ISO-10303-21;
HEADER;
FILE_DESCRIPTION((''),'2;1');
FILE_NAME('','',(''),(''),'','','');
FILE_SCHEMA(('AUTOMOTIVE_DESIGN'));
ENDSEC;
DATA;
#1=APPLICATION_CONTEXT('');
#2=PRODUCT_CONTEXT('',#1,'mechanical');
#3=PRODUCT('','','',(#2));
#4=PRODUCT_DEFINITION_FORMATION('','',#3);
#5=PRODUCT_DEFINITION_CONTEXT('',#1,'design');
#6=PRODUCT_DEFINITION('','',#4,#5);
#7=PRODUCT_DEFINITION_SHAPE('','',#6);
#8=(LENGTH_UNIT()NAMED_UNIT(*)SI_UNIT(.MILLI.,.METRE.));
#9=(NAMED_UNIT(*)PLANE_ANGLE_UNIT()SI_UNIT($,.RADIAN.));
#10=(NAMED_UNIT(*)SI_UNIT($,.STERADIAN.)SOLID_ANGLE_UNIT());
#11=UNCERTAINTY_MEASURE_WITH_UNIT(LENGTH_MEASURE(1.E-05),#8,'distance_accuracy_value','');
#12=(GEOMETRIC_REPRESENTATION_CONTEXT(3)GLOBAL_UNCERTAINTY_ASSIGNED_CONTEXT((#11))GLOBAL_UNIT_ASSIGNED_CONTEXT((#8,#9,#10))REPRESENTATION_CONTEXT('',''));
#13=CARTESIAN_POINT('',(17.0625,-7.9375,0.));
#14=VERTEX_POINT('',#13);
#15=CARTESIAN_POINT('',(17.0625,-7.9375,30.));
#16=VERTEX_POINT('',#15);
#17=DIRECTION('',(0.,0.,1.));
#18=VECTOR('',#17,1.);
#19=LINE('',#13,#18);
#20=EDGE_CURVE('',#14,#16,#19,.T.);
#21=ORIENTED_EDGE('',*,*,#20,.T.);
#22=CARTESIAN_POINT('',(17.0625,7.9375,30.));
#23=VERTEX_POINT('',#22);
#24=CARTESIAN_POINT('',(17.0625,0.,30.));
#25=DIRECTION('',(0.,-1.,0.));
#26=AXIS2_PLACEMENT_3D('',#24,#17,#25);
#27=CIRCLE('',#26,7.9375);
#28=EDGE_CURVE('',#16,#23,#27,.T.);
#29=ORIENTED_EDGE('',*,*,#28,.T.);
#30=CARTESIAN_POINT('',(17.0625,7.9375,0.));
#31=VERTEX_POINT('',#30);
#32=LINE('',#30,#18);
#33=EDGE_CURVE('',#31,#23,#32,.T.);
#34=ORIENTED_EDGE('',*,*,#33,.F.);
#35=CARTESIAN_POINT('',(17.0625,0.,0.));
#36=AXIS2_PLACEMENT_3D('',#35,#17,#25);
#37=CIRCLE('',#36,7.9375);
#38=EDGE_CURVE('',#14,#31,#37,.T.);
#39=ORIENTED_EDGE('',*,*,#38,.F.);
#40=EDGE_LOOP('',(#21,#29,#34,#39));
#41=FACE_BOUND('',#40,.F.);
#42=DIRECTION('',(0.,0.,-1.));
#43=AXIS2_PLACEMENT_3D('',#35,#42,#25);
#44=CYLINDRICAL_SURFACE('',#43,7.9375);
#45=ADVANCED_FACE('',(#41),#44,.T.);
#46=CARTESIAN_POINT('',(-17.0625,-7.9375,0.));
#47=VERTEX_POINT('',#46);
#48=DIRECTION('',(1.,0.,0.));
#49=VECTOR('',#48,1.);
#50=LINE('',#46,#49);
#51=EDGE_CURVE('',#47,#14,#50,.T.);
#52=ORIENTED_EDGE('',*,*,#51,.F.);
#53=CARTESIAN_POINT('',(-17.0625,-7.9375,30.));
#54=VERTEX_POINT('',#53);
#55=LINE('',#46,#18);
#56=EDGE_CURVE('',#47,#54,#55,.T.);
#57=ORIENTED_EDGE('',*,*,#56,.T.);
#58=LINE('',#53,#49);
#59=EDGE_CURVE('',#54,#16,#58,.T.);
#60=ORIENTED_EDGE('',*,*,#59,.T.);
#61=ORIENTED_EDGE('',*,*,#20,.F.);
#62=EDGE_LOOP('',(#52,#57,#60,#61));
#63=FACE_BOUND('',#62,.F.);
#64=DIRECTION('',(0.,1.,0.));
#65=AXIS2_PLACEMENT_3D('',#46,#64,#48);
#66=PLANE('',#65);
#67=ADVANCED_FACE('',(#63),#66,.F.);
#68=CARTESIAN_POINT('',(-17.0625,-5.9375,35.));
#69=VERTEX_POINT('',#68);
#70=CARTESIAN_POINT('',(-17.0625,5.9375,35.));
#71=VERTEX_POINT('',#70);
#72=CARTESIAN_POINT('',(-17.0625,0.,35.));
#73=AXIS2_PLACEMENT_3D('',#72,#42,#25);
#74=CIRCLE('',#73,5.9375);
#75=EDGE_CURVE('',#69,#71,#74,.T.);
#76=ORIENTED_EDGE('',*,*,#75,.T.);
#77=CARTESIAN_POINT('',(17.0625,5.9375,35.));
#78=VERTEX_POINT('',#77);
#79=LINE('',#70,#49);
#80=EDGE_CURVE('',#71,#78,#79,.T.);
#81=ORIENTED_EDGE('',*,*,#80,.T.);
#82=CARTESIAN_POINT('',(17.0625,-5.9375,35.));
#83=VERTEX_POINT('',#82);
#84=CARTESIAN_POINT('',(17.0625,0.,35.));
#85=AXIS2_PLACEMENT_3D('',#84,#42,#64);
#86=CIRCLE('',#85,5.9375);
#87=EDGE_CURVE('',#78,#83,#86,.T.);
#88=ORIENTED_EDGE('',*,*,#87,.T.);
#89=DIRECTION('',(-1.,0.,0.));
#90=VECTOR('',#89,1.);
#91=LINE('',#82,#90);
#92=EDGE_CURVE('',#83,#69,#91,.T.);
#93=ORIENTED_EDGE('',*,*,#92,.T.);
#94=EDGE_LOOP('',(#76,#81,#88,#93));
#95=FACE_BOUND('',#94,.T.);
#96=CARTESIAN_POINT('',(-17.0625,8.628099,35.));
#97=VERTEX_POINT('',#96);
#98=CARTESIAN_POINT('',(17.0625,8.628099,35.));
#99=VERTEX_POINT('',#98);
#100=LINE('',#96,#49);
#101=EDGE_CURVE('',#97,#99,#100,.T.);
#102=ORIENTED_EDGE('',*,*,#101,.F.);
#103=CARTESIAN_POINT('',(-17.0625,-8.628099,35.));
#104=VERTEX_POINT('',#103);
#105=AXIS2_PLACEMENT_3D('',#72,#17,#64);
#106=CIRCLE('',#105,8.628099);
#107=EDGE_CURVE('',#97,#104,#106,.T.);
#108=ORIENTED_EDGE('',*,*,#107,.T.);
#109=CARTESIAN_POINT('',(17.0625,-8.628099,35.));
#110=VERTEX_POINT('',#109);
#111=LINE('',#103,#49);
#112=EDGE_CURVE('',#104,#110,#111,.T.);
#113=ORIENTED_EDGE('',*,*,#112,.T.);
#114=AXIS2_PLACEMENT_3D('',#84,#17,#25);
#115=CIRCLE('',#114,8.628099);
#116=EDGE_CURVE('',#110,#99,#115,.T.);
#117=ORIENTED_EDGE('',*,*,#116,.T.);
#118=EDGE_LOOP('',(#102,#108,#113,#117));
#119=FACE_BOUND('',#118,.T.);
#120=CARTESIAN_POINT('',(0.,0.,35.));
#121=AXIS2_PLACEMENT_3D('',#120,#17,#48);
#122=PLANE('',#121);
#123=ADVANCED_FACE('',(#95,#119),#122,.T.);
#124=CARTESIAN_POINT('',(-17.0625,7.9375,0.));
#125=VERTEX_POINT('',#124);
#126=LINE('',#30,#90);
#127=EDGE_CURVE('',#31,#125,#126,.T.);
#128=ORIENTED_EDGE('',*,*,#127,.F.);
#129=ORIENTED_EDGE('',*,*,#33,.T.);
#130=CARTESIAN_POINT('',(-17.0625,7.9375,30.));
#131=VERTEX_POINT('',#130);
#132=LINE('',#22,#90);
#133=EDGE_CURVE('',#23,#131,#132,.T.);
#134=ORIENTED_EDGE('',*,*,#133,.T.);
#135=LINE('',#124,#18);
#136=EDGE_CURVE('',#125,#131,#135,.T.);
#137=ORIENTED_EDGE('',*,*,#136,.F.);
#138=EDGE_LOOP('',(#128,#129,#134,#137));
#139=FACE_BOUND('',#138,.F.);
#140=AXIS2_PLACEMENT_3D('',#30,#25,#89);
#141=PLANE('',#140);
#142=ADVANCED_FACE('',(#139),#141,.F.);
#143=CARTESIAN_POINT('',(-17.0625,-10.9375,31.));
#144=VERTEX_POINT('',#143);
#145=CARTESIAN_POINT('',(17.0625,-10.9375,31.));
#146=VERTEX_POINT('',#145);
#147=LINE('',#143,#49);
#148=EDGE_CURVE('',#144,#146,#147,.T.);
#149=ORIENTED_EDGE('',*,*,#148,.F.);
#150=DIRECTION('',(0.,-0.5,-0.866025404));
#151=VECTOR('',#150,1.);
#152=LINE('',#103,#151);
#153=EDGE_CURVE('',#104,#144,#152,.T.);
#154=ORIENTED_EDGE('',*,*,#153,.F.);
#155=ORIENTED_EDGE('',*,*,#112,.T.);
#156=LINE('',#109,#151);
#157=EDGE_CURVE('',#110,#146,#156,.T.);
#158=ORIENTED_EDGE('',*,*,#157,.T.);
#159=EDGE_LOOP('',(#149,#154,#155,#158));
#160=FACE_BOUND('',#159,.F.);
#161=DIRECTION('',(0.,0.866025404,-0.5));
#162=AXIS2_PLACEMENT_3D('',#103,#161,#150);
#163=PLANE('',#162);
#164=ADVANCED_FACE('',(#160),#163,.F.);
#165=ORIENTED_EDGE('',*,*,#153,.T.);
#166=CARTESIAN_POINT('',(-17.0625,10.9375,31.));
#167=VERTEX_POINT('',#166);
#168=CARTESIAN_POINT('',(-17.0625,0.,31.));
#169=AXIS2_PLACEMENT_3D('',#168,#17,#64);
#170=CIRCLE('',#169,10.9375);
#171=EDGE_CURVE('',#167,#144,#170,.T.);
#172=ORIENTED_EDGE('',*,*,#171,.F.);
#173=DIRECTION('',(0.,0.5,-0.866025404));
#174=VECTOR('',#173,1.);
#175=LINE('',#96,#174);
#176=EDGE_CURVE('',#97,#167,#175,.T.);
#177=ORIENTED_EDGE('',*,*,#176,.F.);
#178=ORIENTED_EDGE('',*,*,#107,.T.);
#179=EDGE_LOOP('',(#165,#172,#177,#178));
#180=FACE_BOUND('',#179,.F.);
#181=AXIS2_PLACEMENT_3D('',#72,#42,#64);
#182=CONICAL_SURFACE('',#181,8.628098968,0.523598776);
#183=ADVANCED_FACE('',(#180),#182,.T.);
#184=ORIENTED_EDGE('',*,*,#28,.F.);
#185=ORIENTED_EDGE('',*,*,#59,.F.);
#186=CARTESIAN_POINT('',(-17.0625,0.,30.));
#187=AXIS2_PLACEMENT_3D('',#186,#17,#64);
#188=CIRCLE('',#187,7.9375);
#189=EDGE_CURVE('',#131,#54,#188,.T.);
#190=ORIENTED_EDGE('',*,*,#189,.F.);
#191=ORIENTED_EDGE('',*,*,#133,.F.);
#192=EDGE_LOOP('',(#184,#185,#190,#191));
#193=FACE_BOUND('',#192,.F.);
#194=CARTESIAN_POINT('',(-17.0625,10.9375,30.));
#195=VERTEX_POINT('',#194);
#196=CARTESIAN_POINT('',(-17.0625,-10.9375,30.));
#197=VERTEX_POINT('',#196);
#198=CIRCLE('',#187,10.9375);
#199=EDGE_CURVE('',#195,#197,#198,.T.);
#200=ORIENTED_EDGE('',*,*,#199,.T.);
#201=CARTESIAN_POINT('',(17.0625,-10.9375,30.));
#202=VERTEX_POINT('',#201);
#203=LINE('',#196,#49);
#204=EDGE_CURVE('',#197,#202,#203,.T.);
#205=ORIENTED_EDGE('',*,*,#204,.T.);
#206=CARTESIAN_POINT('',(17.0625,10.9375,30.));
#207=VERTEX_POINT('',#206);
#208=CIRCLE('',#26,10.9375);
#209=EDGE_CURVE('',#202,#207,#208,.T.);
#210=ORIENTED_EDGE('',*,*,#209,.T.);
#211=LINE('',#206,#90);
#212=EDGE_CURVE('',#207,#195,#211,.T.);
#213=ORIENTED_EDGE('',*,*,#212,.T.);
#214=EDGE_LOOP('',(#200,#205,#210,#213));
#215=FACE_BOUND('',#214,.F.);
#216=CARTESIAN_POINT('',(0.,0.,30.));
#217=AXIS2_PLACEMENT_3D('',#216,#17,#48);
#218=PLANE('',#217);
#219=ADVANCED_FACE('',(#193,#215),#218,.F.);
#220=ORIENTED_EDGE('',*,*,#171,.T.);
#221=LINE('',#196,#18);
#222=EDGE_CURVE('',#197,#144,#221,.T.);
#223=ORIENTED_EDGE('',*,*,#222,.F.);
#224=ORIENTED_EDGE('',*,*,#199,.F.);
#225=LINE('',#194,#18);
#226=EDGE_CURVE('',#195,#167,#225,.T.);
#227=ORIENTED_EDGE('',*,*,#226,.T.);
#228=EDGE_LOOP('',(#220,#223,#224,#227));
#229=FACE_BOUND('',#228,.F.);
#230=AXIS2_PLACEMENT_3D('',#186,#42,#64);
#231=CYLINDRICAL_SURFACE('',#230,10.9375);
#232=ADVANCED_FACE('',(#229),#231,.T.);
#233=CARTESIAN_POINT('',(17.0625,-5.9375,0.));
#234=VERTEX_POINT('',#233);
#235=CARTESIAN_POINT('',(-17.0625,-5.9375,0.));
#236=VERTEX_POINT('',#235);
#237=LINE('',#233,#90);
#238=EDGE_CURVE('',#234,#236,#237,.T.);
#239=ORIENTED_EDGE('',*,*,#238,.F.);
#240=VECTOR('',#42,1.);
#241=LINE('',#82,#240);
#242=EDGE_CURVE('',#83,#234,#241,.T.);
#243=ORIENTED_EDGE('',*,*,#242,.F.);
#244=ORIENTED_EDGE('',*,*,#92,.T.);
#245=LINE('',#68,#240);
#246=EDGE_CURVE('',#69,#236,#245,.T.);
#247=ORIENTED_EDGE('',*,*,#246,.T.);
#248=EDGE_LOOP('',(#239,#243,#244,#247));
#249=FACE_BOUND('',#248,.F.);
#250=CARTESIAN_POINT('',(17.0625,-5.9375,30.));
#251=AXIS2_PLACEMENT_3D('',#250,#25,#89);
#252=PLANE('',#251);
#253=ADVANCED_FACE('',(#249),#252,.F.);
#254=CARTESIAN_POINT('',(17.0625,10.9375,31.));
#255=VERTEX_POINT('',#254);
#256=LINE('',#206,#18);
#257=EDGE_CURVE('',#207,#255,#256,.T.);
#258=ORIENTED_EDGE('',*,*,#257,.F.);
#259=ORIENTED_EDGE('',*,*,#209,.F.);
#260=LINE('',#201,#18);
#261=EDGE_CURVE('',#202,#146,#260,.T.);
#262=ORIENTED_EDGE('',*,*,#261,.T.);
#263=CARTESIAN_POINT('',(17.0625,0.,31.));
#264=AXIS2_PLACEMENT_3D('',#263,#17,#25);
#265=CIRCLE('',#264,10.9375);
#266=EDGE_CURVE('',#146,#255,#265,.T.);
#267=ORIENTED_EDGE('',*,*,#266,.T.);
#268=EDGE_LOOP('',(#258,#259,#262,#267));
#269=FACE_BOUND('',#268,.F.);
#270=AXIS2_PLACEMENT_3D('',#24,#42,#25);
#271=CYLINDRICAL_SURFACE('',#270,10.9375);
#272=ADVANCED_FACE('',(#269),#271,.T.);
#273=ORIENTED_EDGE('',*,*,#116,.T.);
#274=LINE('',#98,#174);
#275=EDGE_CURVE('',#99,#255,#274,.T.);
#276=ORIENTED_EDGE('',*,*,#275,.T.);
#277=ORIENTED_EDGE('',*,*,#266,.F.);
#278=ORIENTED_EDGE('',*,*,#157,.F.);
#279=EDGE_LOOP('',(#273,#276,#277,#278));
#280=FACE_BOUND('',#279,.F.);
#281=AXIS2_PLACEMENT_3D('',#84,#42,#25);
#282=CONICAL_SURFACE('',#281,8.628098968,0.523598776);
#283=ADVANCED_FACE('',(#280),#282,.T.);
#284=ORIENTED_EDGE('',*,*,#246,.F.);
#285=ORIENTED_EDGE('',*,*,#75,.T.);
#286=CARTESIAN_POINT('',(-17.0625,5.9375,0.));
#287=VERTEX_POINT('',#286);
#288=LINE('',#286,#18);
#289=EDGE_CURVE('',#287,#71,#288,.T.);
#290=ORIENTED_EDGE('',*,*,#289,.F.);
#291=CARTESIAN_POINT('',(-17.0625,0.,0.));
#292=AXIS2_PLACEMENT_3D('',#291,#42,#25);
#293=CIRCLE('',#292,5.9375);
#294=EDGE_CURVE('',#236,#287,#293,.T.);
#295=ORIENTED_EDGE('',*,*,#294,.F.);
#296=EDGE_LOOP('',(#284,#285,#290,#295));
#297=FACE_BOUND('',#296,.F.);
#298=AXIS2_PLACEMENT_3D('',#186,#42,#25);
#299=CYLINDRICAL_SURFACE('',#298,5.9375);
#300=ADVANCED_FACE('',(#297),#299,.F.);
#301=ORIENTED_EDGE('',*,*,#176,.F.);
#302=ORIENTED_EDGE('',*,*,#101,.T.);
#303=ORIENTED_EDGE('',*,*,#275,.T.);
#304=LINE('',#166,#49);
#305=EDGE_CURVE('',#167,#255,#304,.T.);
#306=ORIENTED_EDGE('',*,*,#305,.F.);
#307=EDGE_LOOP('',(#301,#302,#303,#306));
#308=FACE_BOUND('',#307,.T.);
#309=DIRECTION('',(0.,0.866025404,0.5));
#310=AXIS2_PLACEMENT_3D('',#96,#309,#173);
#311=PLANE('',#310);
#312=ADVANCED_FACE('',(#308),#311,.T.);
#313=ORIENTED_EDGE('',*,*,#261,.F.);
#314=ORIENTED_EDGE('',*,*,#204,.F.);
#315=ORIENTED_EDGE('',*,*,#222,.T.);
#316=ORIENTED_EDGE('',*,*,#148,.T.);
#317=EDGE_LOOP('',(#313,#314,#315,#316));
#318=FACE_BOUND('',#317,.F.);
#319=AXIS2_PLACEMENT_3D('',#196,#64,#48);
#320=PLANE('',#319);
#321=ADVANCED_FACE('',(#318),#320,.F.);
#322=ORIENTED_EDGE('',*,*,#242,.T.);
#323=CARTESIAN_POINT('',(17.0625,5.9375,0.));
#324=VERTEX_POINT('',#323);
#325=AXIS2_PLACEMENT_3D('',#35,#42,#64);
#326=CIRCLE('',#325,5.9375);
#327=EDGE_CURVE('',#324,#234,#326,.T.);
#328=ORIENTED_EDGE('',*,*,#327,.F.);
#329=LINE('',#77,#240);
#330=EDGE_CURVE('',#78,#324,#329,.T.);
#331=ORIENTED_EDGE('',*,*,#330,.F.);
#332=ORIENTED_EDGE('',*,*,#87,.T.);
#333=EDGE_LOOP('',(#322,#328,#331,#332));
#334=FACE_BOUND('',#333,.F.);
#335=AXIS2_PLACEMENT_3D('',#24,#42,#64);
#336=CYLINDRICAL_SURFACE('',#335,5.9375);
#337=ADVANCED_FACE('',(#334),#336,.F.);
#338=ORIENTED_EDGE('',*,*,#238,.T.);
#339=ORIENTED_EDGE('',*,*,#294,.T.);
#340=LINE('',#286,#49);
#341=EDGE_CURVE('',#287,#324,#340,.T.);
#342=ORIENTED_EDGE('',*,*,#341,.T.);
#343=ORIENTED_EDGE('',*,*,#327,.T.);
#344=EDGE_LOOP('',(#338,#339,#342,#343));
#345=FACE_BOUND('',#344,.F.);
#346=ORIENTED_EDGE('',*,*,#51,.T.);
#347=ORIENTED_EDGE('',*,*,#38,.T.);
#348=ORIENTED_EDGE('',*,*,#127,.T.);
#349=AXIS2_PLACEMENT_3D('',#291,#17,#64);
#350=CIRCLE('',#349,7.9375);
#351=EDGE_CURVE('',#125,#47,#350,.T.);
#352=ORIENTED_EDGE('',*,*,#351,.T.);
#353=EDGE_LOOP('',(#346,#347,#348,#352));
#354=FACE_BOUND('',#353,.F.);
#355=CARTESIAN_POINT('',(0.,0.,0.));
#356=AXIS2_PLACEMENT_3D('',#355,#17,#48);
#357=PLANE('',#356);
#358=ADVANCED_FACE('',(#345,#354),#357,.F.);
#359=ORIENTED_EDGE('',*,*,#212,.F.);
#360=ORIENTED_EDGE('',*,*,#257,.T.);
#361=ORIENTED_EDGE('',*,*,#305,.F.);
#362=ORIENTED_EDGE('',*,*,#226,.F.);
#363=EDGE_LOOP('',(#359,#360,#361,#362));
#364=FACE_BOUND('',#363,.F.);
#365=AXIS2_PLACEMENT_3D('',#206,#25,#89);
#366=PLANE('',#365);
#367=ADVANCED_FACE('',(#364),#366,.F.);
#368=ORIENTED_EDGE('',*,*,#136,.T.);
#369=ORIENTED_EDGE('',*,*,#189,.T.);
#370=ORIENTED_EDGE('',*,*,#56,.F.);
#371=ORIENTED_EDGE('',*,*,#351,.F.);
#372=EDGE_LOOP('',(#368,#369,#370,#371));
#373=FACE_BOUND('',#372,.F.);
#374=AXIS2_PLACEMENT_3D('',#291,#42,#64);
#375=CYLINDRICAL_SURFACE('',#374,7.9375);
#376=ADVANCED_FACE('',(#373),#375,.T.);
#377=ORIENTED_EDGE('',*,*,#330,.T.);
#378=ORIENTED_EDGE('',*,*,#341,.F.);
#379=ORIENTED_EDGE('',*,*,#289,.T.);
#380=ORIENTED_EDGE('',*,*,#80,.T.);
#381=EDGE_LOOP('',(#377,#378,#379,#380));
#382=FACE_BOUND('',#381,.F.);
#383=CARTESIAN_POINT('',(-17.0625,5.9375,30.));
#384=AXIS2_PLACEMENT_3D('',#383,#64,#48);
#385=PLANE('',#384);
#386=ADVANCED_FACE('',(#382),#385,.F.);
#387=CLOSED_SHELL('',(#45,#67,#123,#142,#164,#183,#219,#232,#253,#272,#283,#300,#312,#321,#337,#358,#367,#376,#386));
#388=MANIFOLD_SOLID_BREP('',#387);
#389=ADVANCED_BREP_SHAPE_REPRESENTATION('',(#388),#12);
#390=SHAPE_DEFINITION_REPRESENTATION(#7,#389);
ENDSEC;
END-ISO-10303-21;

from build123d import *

# Parameters (mm, degrees)
F1_DEPTH    = 30
F3_DEPTH    = 5
F4_T1_DEPTH = 34.125
F4_T4_ANGLE = 180
F4_T6_ANGLE = 180


# Not quite as in the source:
# - a fillet or chamfer that OpenCascade refuses, or shapes differently, is made with other operations: its cross-section is extruded or revolved along the edge and cut away or added


with BuildPart() as f1:
    # F0 (on Top) → F1 (new body)
    with BuildSketch(Plane.XY):
        with BuildLine():
            Line((-17.0625, -7.9375), (0, -7.9375))
            Line((0, -7.9375), (17.0625, -7.9375))
            ThreePointArc((17.0625, -7.9375), (25, 0), (17.0625, 7.9375))
            Line((17.0625, 7.9375), (0, 7.9375))
            Line((0, 7.9375), (-17.0625, 7.9375))
            ThreePointArc((-17.0625, 7.9375), (-25, 0), (-17.0625, -7.9375))
        make_face()
        with BuildLine():
            Line((-17.0625, 5.9375000447), (0, 5.9375000447))
            Line((0, 5.9375000447), (17.0625, 5.9375000447))
            ThreePointArc((17.0625, 5.9375000447), (23.0000000447, 0), (17.0625, -5.9375000447))
            Line((17.0625, -5.9375000447), (0, -5.9375000447))
            Line((0, -5.9375000447), (-17.0625, -5.9375000447))
            ThreePointArc((-17.0625, -5.9375000447), (-23.0000000447, 0), (-17.0625, 5.9375000447))
        make_face(mode=Mode.SUBTRACT)
    extrude(amount=F1_DEPTH)

    # F2 (on face) → F3 (join)
    with BuildSketch(Plane.XY.offset(30)):
        with BuildLine():
            ThreePointArc((17.0625, -10.9375000447), (28.0000000447, 0), (17.0625, 10.9375000447))
            Line((17.0625, 10.9375000447), (-17.0625, 10.9375000447))
            ThreePointArc((-17.0625, 10.9375000447), (-28.0000000447, 0), (-17.0625, -10.9375000447))
            Line((-17.0625, -10.9375000447), (17.0625, -10.9375000447))
        make_face()
        with BuildLine():
            Line((17.0625, -7.9375), (-17.0625, -7.9375))
            ThreePointArc((-17.0625, -7.9375), (-25, 0), (-17.0625, 7.9375))
            Line((-17.0625, 7.9375), (17.0625, 7.9375))
            ThreePointArc((17.0625, 7.9375), (25, 0), (17.0625, -7.9375))
        make_face(mode=Mode.SUBTRACT)
        with BuildLine():
            ThreePointArc((-17.0625, 7.9375), (-25, 0), (-17.0625, -7.9375))
            Line((-17.0625, -7.9375), (17.0625, -7.9375))
            ThreePointArc((17.0625, -7.9375), (25, 0), (17.0625, 7.9375))
            Line((17.0625, 7.9375), (-17.0625, 7.9375))
        make_face()
        with BuildLine():
            Line((-17.0625, 5.9375000447), (17.0625, 5.9375000447))
            ThreePointArc((17.0625, 5.9375000447), (23.0000000447, 0), (17.0625, -5.9375000447))
            Line((17.0625, -5.9375000447), (-17.0625, -5.9375000447))
            ThreePointArc((-17.0625, -5.9375000447), (-23.0000000447, 0), (-17.0625, 5.9375000447))
        make_face(mode=Mode.SUBTRACT)
    extrude(amount=F3_DEPTH)

    # F4: chamfer of 4 x 2.3094010768 on 4 edges, made by hand

    # F4_s2 → F4_t1 (cut)
    with BuildSketch(Plane.YZ.offset(-17.0625)):
        Polygon((-8.6280989679, 35), (-10.9375000447, 31), (-10.9375000447, 35), align=None)
        Polygon((8.6280989679, 35), (10.9375000447, 31), (10.9375000447, 35), align=None)
    extrude(amount=F4_T1_DEPTH, mode=Mode.SUBTRACT)

    # F4_s3 → F4_t4 (revolve, cut)
    with BuildSketch(Plane.YZ.offset(-17.0625)):
        Polygon((8.6280989679, 35), (10.9375000447, 31), (10.9375000447, 35), align=None)
    revolve(axis=Axis((-17.0625, 0, 35), (0, 0, 1)), revolution_arc=F4_T4_ANGLE, mode=Mode.SUBTRACT)

    # F4_s5 → F4_t6 (revolve, cut)
    with BuildSketch(Plane.YZ.offset(17.0625)):
        Polygon((-8.6280989679, 35), (-10.9375000447, 31), (-10.9375000447, 35), align=None)
    revolve(axis=Axis((17.0625, 0, 35), (0, 0, 1)), revolution_arc=F4_T6_ANGLE, mode=Mode.SUBTRACT)


solid = f1.part
